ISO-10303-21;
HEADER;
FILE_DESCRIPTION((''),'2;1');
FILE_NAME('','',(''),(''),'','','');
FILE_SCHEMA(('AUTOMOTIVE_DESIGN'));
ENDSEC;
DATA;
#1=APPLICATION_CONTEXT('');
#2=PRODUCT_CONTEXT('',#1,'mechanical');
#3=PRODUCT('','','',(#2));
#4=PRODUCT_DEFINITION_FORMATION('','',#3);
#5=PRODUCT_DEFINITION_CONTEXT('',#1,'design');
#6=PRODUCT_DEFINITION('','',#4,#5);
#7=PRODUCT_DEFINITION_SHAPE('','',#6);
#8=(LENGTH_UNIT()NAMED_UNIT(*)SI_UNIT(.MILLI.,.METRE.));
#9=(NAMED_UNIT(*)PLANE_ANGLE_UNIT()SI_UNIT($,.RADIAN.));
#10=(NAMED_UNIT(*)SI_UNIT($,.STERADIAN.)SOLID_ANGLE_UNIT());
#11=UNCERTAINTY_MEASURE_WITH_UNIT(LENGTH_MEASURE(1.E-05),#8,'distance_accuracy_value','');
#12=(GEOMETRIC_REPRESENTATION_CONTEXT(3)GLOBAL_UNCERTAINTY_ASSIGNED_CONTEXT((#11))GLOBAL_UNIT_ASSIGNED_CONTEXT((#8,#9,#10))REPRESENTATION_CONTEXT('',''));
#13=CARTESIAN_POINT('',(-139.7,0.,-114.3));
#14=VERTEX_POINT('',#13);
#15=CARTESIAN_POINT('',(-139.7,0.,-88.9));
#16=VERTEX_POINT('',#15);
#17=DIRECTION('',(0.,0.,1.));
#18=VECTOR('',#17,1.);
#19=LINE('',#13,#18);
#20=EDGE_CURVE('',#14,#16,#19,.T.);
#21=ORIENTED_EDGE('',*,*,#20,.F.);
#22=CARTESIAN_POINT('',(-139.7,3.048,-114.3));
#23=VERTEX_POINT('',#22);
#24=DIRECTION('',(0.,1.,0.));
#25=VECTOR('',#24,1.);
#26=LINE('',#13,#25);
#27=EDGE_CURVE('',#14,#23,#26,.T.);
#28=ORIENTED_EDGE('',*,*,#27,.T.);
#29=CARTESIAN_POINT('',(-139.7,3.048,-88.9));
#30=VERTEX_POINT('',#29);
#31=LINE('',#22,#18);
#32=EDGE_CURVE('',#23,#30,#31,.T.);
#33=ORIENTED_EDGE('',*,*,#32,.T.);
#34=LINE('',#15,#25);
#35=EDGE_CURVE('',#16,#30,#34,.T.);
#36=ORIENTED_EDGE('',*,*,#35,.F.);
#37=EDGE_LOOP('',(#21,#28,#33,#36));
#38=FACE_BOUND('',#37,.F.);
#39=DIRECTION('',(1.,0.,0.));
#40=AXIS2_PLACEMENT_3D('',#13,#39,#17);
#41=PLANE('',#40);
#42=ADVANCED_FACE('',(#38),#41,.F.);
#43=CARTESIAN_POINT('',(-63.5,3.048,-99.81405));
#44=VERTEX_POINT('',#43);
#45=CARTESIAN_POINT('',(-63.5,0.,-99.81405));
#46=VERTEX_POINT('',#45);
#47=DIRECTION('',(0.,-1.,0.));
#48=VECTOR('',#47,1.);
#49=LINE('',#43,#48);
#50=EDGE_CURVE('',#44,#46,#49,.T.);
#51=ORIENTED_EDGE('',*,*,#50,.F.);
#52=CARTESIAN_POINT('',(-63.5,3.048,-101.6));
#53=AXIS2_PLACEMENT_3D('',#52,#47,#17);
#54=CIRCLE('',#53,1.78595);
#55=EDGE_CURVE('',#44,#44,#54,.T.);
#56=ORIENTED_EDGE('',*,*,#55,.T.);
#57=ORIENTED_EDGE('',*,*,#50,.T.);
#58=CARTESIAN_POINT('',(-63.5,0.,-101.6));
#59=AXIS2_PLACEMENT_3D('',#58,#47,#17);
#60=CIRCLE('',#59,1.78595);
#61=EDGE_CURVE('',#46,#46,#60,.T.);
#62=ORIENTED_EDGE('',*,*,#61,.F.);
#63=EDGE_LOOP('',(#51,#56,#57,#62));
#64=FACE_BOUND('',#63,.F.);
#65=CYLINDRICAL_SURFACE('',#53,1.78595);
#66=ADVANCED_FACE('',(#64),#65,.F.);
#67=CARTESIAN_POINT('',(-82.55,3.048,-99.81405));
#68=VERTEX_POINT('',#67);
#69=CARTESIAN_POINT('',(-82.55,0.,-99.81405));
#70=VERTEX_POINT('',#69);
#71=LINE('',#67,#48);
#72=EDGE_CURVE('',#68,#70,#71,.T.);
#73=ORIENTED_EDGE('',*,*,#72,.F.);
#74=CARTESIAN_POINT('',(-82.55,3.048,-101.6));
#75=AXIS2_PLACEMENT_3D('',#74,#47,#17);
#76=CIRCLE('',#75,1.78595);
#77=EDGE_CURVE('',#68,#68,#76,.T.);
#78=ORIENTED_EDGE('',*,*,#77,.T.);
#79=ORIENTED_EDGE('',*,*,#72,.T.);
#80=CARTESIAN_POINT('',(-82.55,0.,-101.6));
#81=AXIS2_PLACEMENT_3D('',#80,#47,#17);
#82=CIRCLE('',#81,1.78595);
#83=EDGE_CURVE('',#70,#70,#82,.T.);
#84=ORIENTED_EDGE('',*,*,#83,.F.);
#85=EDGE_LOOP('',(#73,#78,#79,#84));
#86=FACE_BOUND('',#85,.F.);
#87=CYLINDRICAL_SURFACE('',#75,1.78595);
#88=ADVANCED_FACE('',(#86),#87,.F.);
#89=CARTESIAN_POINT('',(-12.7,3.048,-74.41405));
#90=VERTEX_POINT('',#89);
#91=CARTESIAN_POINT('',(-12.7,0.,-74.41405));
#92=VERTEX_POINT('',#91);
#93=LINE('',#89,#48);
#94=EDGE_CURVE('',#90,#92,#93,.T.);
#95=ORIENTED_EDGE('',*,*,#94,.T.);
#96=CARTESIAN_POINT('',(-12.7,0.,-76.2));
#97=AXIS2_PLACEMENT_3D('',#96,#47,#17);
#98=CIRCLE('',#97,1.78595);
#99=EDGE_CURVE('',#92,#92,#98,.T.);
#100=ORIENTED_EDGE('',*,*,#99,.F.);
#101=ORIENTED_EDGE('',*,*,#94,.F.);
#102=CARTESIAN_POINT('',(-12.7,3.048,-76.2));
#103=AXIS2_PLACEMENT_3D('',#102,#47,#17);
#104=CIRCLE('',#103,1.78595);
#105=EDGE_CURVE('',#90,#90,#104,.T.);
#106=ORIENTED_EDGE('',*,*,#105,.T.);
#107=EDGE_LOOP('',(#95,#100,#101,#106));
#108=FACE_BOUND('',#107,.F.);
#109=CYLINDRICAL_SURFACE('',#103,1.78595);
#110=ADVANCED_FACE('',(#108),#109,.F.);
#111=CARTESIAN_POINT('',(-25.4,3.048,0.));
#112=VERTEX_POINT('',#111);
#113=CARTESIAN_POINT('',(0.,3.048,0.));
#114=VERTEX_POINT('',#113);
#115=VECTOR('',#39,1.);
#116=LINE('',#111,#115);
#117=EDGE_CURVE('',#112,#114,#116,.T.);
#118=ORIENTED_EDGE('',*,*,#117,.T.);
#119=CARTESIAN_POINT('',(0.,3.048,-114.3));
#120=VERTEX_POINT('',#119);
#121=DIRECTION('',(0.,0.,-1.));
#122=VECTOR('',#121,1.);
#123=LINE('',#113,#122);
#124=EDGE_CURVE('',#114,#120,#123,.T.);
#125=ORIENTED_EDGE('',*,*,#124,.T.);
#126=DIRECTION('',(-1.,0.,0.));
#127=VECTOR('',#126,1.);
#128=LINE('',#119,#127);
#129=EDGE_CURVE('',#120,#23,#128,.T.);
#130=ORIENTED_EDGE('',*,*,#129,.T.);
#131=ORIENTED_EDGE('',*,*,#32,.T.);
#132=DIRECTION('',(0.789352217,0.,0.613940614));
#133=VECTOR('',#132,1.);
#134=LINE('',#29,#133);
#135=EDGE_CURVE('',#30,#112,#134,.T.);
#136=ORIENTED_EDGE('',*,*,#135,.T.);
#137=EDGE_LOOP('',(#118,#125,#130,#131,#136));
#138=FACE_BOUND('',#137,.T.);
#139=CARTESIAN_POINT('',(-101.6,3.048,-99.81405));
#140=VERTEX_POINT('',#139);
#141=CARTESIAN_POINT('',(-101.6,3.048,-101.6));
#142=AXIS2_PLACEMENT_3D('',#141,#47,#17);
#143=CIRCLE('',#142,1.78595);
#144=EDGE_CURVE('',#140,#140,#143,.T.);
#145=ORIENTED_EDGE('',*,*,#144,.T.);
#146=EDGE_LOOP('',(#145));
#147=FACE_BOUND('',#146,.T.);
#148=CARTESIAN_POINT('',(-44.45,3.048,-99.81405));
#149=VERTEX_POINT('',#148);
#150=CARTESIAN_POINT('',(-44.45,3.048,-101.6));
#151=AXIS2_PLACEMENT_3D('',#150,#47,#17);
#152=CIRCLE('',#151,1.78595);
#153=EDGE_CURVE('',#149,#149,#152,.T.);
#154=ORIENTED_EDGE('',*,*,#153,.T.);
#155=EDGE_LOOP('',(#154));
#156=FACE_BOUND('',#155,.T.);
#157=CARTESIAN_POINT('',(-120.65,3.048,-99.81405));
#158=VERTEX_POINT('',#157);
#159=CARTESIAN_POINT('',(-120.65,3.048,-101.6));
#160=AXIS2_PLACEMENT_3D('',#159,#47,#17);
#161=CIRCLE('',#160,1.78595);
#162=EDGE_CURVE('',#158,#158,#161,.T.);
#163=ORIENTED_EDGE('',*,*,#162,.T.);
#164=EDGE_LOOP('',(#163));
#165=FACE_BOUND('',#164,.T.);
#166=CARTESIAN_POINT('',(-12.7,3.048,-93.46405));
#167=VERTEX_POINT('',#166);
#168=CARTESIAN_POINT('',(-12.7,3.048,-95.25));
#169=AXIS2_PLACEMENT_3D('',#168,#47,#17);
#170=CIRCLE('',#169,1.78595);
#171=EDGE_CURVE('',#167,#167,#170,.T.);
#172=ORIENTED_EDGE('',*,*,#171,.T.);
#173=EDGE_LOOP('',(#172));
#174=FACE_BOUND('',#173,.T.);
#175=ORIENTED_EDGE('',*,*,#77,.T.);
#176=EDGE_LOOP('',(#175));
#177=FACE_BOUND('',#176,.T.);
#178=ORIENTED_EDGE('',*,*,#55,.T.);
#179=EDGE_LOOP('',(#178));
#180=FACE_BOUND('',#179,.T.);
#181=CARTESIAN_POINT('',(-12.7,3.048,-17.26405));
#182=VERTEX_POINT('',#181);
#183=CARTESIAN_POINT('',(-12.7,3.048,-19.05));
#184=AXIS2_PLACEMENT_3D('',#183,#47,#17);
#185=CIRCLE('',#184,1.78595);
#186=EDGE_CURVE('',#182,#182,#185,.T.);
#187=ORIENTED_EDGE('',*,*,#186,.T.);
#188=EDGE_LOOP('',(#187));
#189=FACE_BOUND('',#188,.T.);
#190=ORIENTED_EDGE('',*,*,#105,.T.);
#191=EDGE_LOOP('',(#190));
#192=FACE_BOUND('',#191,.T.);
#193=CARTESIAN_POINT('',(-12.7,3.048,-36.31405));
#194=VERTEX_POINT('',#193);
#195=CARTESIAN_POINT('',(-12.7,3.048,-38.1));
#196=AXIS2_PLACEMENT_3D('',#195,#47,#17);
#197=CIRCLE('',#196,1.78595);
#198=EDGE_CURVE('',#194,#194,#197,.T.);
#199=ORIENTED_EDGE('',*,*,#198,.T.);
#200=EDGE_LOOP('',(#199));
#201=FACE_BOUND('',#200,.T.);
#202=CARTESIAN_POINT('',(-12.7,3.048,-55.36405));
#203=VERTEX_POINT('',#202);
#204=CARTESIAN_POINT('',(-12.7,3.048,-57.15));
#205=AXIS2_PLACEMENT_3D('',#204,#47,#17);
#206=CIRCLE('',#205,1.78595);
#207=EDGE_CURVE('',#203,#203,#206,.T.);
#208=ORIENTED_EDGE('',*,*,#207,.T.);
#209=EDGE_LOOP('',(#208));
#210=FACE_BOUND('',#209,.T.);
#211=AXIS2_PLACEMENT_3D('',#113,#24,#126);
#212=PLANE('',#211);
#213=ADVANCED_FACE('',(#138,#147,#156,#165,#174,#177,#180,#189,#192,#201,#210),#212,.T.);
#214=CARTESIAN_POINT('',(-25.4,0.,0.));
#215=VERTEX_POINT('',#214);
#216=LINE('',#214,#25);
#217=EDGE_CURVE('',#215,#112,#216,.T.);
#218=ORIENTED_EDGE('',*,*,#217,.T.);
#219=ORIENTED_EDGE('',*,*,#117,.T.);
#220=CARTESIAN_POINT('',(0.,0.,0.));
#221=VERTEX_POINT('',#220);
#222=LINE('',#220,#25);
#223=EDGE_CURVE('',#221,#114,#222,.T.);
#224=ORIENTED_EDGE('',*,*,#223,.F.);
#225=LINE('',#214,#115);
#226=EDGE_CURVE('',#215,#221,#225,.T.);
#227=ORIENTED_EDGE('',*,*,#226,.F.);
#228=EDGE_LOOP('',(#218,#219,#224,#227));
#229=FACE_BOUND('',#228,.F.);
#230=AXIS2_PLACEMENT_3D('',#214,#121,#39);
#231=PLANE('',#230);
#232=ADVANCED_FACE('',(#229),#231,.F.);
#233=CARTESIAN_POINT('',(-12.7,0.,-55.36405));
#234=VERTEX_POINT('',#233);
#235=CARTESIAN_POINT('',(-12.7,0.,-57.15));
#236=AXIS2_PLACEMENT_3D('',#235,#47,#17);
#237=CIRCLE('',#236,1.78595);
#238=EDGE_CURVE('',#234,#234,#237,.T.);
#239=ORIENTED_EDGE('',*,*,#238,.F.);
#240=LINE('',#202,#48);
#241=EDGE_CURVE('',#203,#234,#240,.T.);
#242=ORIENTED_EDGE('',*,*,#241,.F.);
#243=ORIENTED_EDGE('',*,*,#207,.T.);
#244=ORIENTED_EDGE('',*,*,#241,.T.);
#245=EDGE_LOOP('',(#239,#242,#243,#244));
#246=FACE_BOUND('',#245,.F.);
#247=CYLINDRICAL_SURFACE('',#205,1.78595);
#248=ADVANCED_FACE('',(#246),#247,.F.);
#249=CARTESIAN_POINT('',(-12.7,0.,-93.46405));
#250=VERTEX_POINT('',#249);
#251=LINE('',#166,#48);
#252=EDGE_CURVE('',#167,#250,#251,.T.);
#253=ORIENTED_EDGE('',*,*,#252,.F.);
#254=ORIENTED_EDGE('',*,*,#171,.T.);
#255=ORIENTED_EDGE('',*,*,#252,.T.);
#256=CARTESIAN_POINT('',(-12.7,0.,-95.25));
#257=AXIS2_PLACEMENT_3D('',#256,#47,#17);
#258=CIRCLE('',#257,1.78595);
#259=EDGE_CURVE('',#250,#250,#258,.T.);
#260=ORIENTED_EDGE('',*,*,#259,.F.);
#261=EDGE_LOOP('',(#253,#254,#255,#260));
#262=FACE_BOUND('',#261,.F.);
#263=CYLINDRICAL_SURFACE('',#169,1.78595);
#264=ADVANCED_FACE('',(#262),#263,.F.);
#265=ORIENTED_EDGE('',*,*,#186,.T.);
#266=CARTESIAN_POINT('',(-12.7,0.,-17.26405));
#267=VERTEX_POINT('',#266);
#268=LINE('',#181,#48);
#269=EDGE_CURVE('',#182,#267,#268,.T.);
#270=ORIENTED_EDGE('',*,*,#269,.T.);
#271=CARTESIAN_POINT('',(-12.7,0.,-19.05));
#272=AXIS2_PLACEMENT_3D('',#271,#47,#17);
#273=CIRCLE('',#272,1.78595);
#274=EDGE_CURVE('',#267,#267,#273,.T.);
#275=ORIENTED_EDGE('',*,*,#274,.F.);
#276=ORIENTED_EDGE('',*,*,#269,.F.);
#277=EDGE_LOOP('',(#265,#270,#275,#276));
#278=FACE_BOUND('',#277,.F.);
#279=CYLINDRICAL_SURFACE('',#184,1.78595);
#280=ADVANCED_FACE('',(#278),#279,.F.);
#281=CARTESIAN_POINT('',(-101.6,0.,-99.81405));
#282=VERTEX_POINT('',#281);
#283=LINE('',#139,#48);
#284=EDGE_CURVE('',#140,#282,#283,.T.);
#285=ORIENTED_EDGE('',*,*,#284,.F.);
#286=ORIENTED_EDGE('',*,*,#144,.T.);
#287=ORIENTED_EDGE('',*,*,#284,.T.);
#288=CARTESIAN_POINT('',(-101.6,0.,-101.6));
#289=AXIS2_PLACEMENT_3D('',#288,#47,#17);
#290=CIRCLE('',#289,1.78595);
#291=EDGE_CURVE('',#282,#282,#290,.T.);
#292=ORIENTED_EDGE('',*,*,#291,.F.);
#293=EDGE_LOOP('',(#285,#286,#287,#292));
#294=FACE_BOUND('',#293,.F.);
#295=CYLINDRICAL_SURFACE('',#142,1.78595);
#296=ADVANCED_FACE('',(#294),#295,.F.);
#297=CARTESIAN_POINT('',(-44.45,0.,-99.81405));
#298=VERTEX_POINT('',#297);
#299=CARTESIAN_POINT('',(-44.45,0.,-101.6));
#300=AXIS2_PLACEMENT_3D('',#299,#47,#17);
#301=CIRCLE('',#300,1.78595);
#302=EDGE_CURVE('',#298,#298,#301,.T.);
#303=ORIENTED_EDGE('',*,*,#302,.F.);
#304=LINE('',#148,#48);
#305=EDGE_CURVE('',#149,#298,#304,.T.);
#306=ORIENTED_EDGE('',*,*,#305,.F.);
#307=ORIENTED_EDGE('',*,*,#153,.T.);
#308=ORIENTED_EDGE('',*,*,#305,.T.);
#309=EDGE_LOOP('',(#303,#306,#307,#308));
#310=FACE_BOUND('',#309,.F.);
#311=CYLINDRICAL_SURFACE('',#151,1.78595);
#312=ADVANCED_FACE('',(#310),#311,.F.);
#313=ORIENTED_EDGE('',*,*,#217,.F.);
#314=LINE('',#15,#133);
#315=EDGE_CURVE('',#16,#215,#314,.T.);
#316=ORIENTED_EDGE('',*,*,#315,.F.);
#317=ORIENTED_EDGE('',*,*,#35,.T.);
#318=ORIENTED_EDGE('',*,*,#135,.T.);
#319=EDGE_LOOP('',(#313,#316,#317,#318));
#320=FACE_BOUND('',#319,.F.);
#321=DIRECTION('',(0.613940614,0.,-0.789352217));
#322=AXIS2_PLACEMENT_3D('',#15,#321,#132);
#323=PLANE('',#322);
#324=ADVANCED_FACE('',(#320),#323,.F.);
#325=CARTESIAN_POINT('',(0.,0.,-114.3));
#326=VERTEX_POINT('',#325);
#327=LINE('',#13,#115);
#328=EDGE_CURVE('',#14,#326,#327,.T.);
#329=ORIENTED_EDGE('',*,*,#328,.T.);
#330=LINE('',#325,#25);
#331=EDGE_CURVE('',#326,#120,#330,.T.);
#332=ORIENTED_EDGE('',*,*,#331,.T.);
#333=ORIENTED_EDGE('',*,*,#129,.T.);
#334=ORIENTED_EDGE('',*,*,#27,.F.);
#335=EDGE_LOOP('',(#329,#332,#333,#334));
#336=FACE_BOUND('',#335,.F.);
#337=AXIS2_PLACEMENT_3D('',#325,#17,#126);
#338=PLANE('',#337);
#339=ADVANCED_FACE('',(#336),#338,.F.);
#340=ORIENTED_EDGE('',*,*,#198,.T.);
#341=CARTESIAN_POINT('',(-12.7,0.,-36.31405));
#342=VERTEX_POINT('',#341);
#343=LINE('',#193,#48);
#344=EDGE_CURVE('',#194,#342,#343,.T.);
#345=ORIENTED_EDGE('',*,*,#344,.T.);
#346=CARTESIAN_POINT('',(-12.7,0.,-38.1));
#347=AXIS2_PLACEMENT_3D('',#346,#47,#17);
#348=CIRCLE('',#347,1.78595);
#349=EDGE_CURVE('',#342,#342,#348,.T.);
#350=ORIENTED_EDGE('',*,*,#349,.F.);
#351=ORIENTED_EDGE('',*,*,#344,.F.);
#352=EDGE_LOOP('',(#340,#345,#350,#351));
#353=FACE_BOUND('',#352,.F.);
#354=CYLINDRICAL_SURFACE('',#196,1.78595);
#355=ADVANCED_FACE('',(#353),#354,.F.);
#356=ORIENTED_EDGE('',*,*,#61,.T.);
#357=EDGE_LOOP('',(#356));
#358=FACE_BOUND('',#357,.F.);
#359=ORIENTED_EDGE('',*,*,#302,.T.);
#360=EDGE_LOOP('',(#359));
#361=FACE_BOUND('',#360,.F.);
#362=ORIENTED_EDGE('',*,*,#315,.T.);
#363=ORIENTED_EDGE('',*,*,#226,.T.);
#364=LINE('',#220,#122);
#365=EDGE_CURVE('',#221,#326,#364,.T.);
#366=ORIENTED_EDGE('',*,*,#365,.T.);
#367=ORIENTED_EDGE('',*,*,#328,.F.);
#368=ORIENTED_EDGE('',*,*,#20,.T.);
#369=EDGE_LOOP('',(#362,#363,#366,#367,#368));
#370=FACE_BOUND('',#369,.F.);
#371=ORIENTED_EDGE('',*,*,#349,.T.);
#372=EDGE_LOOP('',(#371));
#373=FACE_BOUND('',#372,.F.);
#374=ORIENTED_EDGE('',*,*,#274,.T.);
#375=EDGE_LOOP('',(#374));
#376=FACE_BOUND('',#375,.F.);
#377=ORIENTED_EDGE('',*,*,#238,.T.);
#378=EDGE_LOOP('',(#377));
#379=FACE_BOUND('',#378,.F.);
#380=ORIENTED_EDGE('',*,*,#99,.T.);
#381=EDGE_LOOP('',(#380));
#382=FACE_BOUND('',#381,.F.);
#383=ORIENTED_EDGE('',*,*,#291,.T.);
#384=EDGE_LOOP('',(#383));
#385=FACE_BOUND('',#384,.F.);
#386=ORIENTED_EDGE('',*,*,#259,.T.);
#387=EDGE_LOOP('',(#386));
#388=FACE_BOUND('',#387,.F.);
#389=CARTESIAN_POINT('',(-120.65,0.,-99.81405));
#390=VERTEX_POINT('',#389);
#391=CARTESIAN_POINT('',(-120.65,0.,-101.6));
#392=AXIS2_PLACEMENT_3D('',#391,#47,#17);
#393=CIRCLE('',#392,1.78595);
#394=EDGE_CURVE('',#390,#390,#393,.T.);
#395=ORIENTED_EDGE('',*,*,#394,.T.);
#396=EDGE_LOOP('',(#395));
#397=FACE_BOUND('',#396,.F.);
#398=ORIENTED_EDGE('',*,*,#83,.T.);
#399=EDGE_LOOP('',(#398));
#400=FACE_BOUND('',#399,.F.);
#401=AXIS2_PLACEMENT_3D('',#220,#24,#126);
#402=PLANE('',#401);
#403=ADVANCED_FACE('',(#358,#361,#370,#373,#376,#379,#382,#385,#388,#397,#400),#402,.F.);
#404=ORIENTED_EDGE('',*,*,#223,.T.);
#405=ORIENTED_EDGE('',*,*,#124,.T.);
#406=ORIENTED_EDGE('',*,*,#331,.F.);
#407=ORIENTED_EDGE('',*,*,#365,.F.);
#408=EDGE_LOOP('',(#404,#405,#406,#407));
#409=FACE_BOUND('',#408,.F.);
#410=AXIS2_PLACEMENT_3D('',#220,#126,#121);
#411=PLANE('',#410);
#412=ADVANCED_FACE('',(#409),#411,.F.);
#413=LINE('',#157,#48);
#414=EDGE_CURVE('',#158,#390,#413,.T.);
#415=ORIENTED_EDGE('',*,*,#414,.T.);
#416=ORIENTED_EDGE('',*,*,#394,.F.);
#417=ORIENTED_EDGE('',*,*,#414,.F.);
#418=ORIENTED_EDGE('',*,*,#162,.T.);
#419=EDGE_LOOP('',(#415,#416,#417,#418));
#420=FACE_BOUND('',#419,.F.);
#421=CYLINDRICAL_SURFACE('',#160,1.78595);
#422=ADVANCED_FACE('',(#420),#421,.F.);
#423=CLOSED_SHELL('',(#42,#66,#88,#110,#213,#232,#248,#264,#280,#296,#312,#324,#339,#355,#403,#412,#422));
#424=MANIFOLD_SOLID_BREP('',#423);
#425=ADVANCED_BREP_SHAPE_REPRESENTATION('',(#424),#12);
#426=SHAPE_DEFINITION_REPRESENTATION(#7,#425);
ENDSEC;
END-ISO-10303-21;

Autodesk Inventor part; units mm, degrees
ref_plane "YZ Plane" through (0, 0, 0) normal (1, 0, 0) x (0, 1, 0)
ref_plane "XZ Plane" through (0, 0, 0) normal (0, 1, 0) x (-1, 0, 0)
ref_plane "XY Plane" through (0, 0, 0) normal (0, 0, 1) x (1, 0, 0)
sketch "face_sketch" plane through (0, 0, 0) normal (0, 1, 0) x (-1, 0, 0)
  line L0 (0, 0) -> (0, -114.3)
  line L1 (139.7, -114.3) -> (139.7, -88.9)
  line L2 (139.7, -88.9) -> (25.4, 0)
  line L3 (25.4, 0) -> (0, 0)
  line L4 (25.4, 0) -> (25.4, -114.3) construction
  line L5 (0, -114.3) -> (25.4, -114.3)
  line L6 (25.4, -114.3) -> (139.7, -114.3)
  dimension "d0" = 114.3
  dimension "d2" = 25.4
  dimension "d3" = 25.4
  dimension "d5" = 114.3
extrude "Plate1" add sketch "face_sketch" along normal blind 3.048
sketch "Sketch4" plane through (0, 3.048, 0) normal (0, 1, 0) x (1, 0, 0)
  line L0 (-25.4, 0) -> (0, 0) construction
  line L1 (-12.7, 0) -> (-12.7, 19.05) construction
  line L2 (-12.7, 19.05) -> (-12.7, 38.1) construction
  line L3 (-12.7, 38.1) -> (-12.7, 57.15) construction
  line L4 (-12.7, 57.15) -> (-12.7, 76.2) construction
  line L5 (-12.7, 76.2) -> (-12.7, 95.25) construction
  line L6 (-12.7, 95.25) -> (-12.7, 114.3) construction
  line L7 (0, 114.3) -> (-139.7, 114.3) construction
  line L8 (-139.7, 114.3) -> (-139.7, 88.9) construction
  line L9 (-139.7, 101.6) -> (-120.65, 101.6) construction
  line L10 (-120.65, 101.6) -> (-101.6, 101.6) construction
  line L11 (-101.6, 101.6) -> (-82.55, 101.6) construction
  line L12 (-82.55, 101.6) -> (-63.5, 101.6) construction
  line L13 (-63.5, 101.6) -> (-44.45, 101.6) construction
  line L14 (-44.45, 101.6) -> (-25.4, 101.6) construction
  line L15 (-25.4, 0) -> (-25.4, 101.6) construction
hole "Hole1" at (-12.7, 3.048, -19.05) at (-12.7, 3.048, -38.1) at (-12.7, 3.048, -57.15) at (-12.7, 3.048, -76.2) at (-12.7, 3.048, -95.25) at (-120.65, 3.048, -101.6) at (-101.6, 3.048, -101.6) at (-82.55, 3.048, -101.6) at (-63.5, 3.048, -101.6) at (-44.45, 3.048, -101.6) direction (0, -1, 0) diameter 3.5719 depth 3.048 tip angle 118
equation "\"d6\" = rv_hole_diameter"
equation "\"d11\" = Thickness"
equation "\"d0\" = ncbt_rivet_row_length"
equation "\"d2\" = st_outer_diameter"
equation "\"d3\" = st_outer_diameter"
equation "\"d5\" = ncbt_rivet_row_length"
equation "\"BendRadius\" = Thickness"
equation "\"BendReliefWidth\" = Thickness"
equation "\"BendReliefDepth\" = 0.5 * Thickness"
equation "\"CornerReliefSize\" = 4 * Thickness"
equation "\"MinimumRemnant\" = 2 * Thickness"
equation "\"TransitionRadius\" = BendRadius"
equation "\"JacobiRadiusSize\" = BendRadius"
equation "\"GapSize\" = Thickness"
equation "\"bp_thickness\" = 3.048"
equation "\"bp_height\" = 25.4"
equation "\"bp_width\" = 25.4"
equation "\"bp_axle_height\" = 25.4"
equation "\"magic_axle_offset\" = 3.175"
equation "\"bp_tensioner_width\" = 6.35"
equation "\"bp_tensioner_height\" = 19.05"
equation "\"bp_tensioner_from_bottom\" = 50.8"
equation "\"bp_tensioner_from_side\" = 25.4"
equation "\"bp_tensioner_wood_mount_from_tensioner_top\" = 12.7"
equation "\"bp_tensioner_wood_mount_diameter\" = 6.35"
equation "\"gb_mh_seperation\" = 111.1504"
equation "\"gb_mh_diameter\" = 6.35"
equation "\"gb_axle_from_edge\" = 38.1"
equation "\"gb_width\" = 127"
equation "\"gb_bearing_diameter\" = 28.575"
equation "\"gb_to_bottom_of_side_assembly\" = 4.7752"
equation "\"rivet_row_length\" = 114.3"
equation "\"rv_hole_diameter\" = 3.57187"
equation "\"st_outer_diameter\" = 25.4"
equation "\"st_wall_thickness\" = 6.35"
equation "\"st_length\" = 939.8"
equation "\"st_gbmh_from_center\" = 0.5 * gb_mh_seperation"
equation "\"st_cutout_depth_right\" = 254"
equation "\"st_cutout_depth_left\" = 254"
equation "\"st_rivet_distance\" = 19.05"
equation "\"so_inner_diameter\" = 6.35"
equation "\"so_wall_thickness\" = 3.048"
equation "\"so_length\" = 25.4"
equation "\"twb_width\" = st_outer_diameter"
equation "\"twb_length\" = bp_tensioner_width + 2 * twb_margin_on_each_side"
equation "\"twb_height\" = 2 * bp_tensioner_wood_mount_diameter + bp_tensioner_height + 2 * bp_tensioner_wood_mount_from_tensioner_top + twb_margin_on_each_side"
equation "\"twb_margin_on_each_side\" = 6.35"
equation "\"twb_tensioner_from_edge\" = -0.5 * bp_tensioner_height + 0.5 * twb_height"
equation "\"tb_rivet_row_length\" = 127"
equation "\"ncbt_rivet_row_length\" = 114.3"
equation "\"d4\" = BendRadius"
equation "\"Thickness\" = 3.048"
properties part number "no_cutout_bracket_top(ncbt)"
